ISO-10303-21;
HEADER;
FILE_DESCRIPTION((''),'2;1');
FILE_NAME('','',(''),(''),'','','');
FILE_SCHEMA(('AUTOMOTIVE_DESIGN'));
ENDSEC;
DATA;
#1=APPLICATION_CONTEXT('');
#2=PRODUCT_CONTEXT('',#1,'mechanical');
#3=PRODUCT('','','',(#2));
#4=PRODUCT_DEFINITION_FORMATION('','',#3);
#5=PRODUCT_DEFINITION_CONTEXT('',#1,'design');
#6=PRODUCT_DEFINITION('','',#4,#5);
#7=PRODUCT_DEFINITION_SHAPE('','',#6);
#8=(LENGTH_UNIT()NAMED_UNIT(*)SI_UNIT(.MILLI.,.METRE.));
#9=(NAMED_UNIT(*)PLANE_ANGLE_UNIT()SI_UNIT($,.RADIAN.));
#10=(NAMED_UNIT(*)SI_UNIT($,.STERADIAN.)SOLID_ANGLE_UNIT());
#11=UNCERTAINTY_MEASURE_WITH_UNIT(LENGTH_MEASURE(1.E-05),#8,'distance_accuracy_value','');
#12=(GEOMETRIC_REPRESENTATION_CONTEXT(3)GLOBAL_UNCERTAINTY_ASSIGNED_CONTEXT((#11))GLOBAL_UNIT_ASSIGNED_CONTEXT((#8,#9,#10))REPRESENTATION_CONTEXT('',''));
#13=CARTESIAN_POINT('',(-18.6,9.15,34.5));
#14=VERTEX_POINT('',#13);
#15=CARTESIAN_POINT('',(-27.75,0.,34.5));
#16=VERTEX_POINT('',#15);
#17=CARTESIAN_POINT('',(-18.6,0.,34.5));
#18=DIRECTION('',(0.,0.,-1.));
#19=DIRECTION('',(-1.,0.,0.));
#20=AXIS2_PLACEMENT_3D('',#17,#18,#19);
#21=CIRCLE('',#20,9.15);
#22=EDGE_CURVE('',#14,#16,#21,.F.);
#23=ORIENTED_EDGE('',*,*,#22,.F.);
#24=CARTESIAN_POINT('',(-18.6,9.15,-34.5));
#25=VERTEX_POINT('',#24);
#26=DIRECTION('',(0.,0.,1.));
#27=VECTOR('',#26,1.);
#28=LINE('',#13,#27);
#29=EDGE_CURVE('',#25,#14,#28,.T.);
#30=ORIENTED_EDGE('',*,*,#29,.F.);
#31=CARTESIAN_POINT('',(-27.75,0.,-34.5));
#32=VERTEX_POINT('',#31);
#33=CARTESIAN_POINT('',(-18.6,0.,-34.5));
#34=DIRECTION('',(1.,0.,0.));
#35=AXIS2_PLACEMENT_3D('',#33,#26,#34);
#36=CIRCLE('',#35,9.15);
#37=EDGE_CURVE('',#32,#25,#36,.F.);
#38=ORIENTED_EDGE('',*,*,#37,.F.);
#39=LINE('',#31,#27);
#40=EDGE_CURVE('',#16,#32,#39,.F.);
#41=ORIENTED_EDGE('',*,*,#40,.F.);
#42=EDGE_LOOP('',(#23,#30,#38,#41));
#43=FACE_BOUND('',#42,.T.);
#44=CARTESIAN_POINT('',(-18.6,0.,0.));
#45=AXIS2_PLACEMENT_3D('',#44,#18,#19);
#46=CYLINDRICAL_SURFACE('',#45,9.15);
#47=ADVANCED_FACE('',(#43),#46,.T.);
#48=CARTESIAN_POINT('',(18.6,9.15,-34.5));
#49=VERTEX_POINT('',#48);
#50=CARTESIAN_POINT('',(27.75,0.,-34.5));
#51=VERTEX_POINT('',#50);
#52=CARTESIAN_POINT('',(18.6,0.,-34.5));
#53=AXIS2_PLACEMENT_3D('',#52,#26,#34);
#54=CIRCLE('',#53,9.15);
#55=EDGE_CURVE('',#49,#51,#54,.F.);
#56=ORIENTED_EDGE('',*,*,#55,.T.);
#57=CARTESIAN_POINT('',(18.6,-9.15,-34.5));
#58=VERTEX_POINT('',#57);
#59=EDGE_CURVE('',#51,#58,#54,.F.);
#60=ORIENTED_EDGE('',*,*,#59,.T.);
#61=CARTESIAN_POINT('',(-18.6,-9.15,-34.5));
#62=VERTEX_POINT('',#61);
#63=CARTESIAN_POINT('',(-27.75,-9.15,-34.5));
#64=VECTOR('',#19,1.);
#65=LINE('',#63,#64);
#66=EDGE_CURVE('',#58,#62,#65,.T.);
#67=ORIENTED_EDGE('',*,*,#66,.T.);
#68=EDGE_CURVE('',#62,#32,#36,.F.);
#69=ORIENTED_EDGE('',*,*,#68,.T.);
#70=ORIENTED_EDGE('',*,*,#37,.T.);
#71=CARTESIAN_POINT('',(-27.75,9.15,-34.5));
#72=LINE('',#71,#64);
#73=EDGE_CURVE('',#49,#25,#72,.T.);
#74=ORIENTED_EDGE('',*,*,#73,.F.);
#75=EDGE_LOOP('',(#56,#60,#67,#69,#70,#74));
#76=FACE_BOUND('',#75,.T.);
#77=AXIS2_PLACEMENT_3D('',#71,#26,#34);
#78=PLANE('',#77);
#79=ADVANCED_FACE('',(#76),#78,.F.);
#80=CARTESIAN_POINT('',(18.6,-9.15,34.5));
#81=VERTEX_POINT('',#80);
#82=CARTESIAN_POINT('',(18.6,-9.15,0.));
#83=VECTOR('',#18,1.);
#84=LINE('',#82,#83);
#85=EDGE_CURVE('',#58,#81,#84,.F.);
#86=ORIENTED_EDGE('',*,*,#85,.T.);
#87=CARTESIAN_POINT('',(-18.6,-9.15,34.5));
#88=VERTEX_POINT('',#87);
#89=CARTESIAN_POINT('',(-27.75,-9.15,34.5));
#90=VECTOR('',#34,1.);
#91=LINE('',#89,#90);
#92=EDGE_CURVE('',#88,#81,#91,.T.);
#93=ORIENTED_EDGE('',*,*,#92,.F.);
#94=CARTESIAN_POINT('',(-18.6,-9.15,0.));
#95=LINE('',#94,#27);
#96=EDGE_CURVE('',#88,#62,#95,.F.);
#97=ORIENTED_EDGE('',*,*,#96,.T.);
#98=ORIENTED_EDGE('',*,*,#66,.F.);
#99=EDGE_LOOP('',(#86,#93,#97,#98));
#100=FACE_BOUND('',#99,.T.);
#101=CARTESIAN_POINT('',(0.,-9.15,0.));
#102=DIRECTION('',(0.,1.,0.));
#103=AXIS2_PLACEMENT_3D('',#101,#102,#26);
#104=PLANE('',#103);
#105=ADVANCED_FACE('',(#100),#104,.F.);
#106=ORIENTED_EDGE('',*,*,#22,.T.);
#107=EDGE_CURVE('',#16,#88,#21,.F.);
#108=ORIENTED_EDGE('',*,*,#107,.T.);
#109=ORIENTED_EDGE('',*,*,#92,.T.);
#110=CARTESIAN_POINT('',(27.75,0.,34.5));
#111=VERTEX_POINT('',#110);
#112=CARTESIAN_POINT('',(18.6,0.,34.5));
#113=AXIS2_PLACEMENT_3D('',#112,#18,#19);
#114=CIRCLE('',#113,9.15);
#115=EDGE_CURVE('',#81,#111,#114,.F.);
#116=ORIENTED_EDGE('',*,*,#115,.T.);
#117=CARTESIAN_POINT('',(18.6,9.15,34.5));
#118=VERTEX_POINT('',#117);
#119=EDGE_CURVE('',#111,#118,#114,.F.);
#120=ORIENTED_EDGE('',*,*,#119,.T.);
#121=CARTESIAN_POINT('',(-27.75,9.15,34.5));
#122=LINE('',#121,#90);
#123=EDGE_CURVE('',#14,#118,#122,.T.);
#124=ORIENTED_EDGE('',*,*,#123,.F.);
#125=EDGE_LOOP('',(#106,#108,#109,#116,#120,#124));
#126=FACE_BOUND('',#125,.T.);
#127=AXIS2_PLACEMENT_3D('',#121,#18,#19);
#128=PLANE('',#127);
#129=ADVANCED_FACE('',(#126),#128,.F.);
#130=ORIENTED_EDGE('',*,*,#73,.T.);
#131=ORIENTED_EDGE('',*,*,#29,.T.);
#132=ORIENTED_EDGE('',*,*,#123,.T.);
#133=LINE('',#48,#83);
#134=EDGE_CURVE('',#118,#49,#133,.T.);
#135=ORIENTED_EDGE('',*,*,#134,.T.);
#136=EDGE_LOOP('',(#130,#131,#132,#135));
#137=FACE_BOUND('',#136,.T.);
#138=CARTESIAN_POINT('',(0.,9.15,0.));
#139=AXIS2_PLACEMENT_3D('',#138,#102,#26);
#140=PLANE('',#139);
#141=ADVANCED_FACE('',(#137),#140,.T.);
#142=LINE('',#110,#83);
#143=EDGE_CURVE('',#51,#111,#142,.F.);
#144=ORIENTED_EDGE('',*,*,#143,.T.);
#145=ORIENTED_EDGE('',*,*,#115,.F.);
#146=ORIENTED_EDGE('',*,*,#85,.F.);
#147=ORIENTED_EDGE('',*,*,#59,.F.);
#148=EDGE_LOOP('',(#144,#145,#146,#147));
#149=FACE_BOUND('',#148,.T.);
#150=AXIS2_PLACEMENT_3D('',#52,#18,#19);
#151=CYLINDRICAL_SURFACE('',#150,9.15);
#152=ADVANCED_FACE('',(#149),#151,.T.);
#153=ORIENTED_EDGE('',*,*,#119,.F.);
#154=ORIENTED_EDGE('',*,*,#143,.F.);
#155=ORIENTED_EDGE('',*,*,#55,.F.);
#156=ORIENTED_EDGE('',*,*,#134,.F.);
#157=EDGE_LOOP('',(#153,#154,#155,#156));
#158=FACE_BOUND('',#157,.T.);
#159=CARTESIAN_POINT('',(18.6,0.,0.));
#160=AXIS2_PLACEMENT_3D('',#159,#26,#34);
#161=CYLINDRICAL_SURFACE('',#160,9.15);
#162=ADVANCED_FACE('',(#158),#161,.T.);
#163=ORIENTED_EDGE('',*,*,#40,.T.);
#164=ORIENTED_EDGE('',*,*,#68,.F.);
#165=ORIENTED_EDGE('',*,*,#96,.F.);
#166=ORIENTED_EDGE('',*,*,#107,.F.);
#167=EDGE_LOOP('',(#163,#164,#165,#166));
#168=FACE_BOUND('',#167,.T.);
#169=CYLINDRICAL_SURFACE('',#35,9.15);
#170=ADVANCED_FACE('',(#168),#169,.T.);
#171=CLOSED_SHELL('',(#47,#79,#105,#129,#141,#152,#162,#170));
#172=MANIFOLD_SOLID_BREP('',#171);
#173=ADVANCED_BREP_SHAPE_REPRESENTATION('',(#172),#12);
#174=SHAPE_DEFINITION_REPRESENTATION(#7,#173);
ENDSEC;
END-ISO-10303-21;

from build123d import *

# Parameters (mm, degrees)
SKETCH1_W           = 55.5
SKETCH1_H           = 69
BOSS_EXTRUDE1_DEPTH = 9.15
FILLET1_R           = 9.15


with BuildPart() as part:
    # Sketch1 → Boss-Extrude1 (new, symmetric)
    with BuildSketch(Plane(origin=(0, 0, 0), x_dir=(1, 0, 0), z_dir=(0, 1, 0))):
        Rectangle(SKETCH1_W, SKETCH1_H)
    extrude(amount=BOSS_EXTRUDE1_DEPTH, both=True)

    # Fillet1
    fillet1_edges = [part.edges().sort_by_distance(p)[0] for p in [
        (27.75, -9.15, 0),
        (27.75, 9.15, 0),
        (-27.75, -9.15, 0),
        (-27.75, 9.15, 0),
    ]]
    fillet(fillet1_edges, radius=FILLET1_R - 0.0001)  # a hair under: the kernel refuses the full size


solid = part.part
